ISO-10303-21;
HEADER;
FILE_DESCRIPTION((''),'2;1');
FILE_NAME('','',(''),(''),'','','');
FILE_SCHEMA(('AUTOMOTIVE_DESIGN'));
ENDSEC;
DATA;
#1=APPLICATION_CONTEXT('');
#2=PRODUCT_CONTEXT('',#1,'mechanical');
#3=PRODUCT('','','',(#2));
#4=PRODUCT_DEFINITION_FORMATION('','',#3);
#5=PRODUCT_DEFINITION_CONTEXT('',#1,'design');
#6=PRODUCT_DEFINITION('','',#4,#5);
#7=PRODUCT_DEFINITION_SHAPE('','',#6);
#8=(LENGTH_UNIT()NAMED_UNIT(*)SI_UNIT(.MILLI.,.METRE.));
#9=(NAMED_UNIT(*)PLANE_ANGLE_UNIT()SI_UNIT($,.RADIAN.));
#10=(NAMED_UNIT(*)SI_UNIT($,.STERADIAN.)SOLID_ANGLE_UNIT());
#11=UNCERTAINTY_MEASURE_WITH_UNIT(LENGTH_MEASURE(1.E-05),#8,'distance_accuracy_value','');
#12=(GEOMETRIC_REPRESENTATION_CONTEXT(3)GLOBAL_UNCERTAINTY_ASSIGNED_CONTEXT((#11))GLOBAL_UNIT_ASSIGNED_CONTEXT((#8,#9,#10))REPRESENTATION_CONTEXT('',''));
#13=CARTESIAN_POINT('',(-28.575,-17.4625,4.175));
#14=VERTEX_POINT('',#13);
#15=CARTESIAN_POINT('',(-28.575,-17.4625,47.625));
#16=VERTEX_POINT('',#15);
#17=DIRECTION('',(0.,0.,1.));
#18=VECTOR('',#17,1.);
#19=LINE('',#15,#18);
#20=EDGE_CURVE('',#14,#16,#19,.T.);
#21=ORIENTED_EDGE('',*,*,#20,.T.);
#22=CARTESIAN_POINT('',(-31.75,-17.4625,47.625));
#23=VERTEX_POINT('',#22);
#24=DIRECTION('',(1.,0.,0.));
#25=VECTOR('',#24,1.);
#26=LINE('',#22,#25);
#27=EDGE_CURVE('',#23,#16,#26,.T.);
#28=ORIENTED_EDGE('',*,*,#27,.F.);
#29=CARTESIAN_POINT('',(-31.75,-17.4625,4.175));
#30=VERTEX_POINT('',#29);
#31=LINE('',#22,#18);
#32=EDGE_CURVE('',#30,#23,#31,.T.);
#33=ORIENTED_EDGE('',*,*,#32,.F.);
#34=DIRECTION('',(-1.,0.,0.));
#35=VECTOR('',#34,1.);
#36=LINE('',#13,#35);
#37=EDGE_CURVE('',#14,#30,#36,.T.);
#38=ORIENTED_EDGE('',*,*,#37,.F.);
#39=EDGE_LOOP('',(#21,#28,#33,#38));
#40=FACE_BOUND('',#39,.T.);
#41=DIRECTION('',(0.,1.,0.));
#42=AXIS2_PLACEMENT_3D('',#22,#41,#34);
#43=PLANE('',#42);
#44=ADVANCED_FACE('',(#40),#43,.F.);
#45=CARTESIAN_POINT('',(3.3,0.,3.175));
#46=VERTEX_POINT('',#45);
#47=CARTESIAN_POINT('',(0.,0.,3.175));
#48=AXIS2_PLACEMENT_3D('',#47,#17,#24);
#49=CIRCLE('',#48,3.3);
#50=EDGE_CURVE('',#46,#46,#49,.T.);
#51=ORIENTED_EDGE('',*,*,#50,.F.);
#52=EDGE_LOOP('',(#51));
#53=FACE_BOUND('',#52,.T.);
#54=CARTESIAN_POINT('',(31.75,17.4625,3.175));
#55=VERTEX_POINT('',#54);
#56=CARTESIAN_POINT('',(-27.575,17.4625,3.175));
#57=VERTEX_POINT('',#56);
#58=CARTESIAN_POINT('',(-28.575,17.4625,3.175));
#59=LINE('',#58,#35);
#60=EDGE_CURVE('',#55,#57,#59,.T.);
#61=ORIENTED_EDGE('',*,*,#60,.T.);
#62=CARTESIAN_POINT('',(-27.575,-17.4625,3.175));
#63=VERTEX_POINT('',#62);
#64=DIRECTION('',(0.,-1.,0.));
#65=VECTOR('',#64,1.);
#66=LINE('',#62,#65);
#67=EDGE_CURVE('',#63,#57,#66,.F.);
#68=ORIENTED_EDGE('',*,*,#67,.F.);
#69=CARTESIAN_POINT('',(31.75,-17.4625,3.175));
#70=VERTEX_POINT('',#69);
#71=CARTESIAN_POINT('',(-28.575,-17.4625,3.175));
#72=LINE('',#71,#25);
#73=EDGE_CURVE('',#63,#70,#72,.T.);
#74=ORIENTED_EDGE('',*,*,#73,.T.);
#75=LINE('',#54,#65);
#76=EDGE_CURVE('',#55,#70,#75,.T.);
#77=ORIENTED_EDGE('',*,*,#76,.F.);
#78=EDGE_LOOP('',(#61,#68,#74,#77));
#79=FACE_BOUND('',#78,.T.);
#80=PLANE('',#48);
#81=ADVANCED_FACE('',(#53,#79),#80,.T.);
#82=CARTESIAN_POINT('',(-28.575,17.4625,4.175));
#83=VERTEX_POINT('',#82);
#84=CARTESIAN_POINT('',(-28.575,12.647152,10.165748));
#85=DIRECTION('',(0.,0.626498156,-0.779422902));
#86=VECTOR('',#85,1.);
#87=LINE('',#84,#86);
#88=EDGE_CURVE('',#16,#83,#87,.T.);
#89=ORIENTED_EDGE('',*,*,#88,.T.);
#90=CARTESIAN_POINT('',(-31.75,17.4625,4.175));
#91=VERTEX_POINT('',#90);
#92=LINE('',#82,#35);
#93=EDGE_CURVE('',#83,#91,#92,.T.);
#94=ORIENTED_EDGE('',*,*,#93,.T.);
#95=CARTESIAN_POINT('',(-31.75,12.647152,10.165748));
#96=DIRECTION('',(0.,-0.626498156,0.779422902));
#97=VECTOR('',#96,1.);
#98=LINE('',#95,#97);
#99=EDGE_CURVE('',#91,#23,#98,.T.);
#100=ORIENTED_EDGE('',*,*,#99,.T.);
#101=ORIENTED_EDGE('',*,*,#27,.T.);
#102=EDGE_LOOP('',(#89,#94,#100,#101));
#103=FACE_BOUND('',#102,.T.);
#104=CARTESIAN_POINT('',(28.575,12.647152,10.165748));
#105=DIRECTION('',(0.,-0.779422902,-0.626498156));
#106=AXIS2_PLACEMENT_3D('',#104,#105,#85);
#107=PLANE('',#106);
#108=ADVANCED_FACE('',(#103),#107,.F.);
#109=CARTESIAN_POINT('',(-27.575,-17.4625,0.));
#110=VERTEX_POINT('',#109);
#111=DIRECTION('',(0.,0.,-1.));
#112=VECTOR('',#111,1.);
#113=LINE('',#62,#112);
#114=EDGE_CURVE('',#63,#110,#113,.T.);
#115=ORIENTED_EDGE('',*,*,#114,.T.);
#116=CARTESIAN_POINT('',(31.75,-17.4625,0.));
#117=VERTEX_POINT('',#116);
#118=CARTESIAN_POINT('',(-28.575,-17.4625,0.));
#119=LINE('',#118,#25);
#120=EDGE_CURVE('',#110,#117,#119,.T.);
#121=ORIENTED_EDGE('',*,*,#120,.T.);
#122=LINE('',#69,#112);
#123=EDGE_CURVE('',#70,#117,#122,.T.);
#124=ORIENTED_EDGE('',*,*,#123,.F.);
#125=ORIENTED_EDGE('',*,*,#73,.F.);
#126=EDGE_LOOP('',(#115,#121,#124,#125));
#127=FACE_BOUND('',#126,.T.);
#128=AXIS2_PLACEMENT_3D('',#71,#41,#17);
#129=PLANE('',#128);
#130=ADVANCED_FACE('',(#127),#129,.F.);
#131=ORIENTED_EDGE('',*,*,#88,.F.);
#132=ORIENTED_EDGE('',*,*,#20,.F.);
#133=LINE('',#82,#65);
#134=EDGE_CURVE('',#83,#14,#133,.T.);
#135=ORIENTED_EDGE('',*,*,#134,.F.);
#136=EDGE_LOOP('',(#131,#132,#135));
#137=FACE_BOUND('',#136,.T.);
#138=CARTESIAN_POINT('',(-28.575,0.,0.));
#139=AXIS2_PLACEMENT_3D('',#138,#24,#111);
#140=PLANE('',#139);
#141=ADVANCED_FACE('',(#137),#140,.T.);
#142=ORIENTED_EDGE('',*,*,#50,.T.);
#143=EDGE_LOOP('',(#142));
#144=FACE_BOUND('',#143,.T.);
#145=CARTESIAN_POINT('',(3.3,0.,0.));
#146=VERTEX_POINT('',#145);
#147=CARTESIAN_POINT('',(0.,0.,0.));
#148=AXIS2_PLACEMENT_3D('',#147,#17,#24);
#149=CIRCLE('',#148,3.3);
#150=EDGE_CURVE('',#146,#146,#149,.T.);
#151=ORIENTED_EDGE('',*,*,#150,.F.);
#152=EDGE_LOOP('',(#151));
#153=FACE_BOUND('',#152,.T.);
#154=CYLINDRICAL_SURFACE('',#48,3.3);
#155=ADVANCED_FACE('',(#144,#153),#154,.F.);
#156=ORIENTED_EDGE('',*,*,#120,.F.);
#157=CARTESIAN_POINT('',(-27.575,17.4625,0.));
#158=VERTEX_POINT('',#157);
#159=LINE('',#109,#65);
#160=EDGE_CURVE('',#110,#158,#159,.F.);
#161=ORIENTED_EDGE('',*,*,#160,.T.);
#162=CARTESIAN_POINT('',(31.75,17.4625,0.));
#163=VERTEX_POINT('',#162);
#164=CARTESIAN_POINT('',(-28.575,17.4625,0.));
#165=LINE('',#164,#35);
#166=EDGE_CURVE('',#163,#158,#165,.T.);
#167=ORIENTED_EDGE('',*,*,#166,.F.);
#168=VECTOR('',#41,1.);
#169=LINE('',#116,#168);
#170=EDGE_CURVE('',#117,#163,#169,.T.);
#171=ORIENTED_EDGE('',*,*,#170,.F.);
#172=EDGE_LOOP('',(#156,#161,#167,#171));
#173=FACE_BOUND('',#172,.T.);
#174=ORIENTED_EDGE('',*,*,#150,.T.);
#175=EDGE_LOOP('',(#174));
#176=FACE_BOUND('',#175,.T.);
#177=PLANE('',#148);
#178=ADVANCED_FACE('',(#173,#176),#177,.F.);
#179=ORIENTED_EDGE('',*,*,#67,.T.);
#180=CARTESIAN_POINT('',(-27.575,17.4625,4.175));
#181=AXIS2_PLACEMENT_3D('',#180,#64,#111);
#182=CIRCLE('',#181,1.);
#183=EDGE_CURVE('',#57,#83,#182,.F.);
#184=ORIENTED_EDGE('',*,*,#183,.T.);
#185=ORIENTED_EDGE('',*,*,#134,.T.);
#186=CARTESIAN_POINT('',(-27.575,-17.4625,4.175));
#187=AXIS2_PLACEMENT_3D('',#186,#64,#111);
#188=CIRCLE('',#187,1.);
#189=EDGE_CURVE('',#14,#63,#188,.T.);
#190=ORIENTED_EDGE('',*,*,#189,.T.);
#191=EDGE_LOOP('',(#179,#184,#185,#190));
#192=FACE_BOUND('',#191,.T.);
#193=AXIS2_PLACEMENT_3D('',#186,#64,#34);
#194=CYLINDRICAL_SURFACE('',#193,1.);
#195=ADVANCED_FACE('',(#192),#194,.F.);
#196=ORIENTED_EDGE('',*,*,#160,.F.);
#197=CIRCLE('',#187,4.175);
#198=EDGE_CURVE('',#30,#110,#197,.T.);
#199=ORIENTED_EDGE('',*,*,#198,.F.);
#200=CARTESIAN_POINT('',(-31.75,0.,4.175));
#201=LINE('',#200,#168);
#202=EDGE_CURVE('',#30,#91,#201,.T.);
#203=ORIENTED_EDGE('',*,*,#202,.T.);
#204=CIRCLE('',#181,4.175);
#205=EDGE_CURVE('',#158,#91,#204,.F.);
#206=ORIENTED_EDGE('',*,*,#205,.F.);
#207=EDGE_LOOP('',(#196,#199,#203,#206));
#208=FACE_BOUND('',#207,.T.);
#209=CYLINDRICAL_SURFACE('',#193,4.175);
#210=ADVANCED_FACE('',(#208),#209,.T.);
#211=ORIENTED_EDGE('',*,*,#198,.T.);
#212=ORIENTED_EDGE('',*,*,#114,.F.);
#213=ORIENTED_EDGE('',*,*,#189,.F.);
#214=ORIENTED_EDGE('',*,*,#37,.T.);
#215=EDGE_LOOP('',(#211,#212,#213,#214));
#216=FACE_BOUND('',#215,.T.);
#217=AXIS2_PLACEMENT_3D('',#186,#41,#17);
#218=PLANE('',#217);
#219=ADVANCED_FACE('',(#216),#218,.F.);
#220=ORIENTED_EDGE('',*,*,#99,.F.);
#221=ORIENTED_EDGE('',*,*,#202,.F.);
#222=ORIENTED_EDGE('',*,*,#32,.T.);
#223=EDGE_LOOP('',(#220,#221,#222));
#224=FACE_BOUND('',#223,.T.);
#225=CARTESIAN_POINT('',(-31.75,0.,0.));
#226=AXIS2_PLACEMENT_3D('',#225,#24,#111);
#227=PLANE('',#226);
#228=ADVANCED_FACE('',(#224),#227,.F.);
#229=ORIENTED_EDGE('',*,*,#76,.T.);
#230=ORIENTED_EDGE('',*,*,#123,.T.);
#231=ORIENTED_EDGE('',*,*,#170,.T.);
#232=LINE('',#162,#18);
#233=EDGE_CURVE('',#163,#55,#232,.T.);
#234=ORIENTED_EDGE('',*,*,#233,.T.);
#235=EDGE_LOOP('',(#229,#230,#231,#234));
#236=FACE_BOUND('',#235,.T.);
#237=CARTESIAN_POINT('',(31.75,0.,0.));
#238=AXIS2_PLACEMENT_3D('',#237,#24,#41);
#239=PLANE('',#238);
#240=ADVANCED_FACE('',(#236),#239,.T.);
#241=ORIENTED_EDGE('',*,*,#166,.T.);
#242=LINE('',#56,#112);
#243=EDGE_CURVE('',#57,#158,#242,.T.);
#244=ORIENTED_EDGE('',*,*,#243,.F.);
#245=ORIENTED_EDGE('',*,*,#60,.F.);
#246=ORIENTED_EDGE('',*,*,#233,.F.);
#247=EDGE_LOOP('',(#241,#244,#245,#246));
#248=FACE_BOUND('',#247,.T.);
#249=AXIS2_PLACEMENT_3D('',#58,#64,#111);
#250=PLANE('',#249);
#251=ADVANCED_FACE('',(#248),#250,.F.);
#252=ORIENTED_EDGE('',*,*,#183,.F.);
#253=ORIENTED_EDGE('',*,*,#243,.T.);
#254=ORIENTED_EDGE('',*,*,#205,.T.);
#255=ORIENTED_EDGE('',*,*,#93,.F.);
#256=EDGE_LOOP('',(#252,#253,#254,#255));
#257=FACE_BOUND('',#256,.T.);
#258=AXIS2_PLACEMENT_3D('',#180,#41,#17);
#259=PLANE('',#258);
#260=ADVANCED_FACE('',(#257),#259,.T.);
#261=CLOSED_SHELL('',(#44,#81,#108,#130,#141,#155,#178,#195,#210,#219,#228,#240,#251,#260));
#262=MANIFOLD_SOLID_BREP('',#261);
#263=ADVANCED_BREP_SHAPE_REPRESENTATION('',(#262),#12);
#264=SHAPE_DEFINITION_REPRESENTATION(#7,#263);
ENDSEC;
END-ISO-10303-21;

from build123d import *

# Parameters (mm, degrees)
SKETCH2_W                    = 57.15
SKETCH2_H                    = 34.925
BASE_FLANGE1_DEPTH           = 3.175
M6_CLEARANCE_HOLE1_D         = 6.6
EDGE_FLANGE2_STRIP_W         = 14.7
EDGE_FLANGE2_STRIP_H         = 3.175
EDGE_FLANGE2_STRIP_CUT_DEPTH = 34.925
EDGE_FLANGE2_DEPTH           = 34.925
CUT_EXTRUDE2_DEPTH           = 79.817416579
SKETCH21_W                   = 3.175
SKETCH21_H                   = 34.925
BOSS_EXTRUDE1_DEPTH          = 3.175


# Sheet-metal steps are written as plain solids
with BuildPart() as part:
    # Sketch2 → Base-Flange1 (new body)
    with BuildSketch(Plane.XY):
        Rectangle(SKETCH2_W, SKETCH2_H)
    extrude(amount=BASE_FLANGE1_DEPTH)

    # M6 Clearance Hole1 (through all)
    with Locations(Plane.XY.offset(3.175)):
        with Locations((0, 0)):
            Hole(M6_CLEARANCE_HOLE1_D / 2)

    # Edge-Flange2 strip (across the edge) → Edge-Flange2 strip cut (cut)
    with BuildSketch(Plane(origin=(-28.575, 17.4625, 3.175), x_dir=(1, 0, 0), z_dir=(0, -1, 0))):
        with Locations((-6.35, -1.5875)):
            Rectangle(EDGE_FLANGE2_STRIP_W, EDGE_FLANGE2_STRIP_H)
    extrude(amount=EDGE_FLANGE2_STRIP_CUT_DEPTH, mode=Mode.SUBTRACT)

    # Edge-Flange2 section (across the edge) → Edge-Flange2 (add)
    with BuildSketch(Plane(origin=(-28.575, 17.4625, 3.175), x_dir=(1, 0, 0), z_dir=(0, -1, 0))):
        with BuildLine():
            Line((-3.175, 1), (-3.175, 44.45))
            Line((-3.175, 44.45), (0, 44.45))
            Line((0, 44.45), (0, 1))
            ThreePointArc((0, 1), (0.292893219, 0.292893219), (1, 0))
            Line((1, 0), (1, -3.175))
            ThreePointArc((1, -3.175), (-1.952170811, -1.952170811), (-3.175, 1))
        make_face()
    extrude(amount=EDGE_FLANGE2_DEPTH)

    # Sketch20 → Cut-Extrude2 (cut, through all)
    with BuildSketch(Plane.ZY.offset(31.75)):
        Polygon((4.175, 17.4625), (47.625, -17.4625), (47.625, 17.4625), align=None)
    extrude(amount=-CUT_EXTRUDE2_DEPTH, mode=Mode.SUBTRACT)

    # Sketch21 → Boss-Extrude1 (add)
    with BuildSketch(Plane(origin=(28.575, 0, 0), x_dir=(0, 0, -1), z_dir=(1, 0, 0))):
        with Locations((-1.5875, 0)):
            Rectangle(SKETCH21_W, SKETCH21_H)
    extrude(amount=BOSS_EXTRUDE1_DEPTH)


solid = part.part
